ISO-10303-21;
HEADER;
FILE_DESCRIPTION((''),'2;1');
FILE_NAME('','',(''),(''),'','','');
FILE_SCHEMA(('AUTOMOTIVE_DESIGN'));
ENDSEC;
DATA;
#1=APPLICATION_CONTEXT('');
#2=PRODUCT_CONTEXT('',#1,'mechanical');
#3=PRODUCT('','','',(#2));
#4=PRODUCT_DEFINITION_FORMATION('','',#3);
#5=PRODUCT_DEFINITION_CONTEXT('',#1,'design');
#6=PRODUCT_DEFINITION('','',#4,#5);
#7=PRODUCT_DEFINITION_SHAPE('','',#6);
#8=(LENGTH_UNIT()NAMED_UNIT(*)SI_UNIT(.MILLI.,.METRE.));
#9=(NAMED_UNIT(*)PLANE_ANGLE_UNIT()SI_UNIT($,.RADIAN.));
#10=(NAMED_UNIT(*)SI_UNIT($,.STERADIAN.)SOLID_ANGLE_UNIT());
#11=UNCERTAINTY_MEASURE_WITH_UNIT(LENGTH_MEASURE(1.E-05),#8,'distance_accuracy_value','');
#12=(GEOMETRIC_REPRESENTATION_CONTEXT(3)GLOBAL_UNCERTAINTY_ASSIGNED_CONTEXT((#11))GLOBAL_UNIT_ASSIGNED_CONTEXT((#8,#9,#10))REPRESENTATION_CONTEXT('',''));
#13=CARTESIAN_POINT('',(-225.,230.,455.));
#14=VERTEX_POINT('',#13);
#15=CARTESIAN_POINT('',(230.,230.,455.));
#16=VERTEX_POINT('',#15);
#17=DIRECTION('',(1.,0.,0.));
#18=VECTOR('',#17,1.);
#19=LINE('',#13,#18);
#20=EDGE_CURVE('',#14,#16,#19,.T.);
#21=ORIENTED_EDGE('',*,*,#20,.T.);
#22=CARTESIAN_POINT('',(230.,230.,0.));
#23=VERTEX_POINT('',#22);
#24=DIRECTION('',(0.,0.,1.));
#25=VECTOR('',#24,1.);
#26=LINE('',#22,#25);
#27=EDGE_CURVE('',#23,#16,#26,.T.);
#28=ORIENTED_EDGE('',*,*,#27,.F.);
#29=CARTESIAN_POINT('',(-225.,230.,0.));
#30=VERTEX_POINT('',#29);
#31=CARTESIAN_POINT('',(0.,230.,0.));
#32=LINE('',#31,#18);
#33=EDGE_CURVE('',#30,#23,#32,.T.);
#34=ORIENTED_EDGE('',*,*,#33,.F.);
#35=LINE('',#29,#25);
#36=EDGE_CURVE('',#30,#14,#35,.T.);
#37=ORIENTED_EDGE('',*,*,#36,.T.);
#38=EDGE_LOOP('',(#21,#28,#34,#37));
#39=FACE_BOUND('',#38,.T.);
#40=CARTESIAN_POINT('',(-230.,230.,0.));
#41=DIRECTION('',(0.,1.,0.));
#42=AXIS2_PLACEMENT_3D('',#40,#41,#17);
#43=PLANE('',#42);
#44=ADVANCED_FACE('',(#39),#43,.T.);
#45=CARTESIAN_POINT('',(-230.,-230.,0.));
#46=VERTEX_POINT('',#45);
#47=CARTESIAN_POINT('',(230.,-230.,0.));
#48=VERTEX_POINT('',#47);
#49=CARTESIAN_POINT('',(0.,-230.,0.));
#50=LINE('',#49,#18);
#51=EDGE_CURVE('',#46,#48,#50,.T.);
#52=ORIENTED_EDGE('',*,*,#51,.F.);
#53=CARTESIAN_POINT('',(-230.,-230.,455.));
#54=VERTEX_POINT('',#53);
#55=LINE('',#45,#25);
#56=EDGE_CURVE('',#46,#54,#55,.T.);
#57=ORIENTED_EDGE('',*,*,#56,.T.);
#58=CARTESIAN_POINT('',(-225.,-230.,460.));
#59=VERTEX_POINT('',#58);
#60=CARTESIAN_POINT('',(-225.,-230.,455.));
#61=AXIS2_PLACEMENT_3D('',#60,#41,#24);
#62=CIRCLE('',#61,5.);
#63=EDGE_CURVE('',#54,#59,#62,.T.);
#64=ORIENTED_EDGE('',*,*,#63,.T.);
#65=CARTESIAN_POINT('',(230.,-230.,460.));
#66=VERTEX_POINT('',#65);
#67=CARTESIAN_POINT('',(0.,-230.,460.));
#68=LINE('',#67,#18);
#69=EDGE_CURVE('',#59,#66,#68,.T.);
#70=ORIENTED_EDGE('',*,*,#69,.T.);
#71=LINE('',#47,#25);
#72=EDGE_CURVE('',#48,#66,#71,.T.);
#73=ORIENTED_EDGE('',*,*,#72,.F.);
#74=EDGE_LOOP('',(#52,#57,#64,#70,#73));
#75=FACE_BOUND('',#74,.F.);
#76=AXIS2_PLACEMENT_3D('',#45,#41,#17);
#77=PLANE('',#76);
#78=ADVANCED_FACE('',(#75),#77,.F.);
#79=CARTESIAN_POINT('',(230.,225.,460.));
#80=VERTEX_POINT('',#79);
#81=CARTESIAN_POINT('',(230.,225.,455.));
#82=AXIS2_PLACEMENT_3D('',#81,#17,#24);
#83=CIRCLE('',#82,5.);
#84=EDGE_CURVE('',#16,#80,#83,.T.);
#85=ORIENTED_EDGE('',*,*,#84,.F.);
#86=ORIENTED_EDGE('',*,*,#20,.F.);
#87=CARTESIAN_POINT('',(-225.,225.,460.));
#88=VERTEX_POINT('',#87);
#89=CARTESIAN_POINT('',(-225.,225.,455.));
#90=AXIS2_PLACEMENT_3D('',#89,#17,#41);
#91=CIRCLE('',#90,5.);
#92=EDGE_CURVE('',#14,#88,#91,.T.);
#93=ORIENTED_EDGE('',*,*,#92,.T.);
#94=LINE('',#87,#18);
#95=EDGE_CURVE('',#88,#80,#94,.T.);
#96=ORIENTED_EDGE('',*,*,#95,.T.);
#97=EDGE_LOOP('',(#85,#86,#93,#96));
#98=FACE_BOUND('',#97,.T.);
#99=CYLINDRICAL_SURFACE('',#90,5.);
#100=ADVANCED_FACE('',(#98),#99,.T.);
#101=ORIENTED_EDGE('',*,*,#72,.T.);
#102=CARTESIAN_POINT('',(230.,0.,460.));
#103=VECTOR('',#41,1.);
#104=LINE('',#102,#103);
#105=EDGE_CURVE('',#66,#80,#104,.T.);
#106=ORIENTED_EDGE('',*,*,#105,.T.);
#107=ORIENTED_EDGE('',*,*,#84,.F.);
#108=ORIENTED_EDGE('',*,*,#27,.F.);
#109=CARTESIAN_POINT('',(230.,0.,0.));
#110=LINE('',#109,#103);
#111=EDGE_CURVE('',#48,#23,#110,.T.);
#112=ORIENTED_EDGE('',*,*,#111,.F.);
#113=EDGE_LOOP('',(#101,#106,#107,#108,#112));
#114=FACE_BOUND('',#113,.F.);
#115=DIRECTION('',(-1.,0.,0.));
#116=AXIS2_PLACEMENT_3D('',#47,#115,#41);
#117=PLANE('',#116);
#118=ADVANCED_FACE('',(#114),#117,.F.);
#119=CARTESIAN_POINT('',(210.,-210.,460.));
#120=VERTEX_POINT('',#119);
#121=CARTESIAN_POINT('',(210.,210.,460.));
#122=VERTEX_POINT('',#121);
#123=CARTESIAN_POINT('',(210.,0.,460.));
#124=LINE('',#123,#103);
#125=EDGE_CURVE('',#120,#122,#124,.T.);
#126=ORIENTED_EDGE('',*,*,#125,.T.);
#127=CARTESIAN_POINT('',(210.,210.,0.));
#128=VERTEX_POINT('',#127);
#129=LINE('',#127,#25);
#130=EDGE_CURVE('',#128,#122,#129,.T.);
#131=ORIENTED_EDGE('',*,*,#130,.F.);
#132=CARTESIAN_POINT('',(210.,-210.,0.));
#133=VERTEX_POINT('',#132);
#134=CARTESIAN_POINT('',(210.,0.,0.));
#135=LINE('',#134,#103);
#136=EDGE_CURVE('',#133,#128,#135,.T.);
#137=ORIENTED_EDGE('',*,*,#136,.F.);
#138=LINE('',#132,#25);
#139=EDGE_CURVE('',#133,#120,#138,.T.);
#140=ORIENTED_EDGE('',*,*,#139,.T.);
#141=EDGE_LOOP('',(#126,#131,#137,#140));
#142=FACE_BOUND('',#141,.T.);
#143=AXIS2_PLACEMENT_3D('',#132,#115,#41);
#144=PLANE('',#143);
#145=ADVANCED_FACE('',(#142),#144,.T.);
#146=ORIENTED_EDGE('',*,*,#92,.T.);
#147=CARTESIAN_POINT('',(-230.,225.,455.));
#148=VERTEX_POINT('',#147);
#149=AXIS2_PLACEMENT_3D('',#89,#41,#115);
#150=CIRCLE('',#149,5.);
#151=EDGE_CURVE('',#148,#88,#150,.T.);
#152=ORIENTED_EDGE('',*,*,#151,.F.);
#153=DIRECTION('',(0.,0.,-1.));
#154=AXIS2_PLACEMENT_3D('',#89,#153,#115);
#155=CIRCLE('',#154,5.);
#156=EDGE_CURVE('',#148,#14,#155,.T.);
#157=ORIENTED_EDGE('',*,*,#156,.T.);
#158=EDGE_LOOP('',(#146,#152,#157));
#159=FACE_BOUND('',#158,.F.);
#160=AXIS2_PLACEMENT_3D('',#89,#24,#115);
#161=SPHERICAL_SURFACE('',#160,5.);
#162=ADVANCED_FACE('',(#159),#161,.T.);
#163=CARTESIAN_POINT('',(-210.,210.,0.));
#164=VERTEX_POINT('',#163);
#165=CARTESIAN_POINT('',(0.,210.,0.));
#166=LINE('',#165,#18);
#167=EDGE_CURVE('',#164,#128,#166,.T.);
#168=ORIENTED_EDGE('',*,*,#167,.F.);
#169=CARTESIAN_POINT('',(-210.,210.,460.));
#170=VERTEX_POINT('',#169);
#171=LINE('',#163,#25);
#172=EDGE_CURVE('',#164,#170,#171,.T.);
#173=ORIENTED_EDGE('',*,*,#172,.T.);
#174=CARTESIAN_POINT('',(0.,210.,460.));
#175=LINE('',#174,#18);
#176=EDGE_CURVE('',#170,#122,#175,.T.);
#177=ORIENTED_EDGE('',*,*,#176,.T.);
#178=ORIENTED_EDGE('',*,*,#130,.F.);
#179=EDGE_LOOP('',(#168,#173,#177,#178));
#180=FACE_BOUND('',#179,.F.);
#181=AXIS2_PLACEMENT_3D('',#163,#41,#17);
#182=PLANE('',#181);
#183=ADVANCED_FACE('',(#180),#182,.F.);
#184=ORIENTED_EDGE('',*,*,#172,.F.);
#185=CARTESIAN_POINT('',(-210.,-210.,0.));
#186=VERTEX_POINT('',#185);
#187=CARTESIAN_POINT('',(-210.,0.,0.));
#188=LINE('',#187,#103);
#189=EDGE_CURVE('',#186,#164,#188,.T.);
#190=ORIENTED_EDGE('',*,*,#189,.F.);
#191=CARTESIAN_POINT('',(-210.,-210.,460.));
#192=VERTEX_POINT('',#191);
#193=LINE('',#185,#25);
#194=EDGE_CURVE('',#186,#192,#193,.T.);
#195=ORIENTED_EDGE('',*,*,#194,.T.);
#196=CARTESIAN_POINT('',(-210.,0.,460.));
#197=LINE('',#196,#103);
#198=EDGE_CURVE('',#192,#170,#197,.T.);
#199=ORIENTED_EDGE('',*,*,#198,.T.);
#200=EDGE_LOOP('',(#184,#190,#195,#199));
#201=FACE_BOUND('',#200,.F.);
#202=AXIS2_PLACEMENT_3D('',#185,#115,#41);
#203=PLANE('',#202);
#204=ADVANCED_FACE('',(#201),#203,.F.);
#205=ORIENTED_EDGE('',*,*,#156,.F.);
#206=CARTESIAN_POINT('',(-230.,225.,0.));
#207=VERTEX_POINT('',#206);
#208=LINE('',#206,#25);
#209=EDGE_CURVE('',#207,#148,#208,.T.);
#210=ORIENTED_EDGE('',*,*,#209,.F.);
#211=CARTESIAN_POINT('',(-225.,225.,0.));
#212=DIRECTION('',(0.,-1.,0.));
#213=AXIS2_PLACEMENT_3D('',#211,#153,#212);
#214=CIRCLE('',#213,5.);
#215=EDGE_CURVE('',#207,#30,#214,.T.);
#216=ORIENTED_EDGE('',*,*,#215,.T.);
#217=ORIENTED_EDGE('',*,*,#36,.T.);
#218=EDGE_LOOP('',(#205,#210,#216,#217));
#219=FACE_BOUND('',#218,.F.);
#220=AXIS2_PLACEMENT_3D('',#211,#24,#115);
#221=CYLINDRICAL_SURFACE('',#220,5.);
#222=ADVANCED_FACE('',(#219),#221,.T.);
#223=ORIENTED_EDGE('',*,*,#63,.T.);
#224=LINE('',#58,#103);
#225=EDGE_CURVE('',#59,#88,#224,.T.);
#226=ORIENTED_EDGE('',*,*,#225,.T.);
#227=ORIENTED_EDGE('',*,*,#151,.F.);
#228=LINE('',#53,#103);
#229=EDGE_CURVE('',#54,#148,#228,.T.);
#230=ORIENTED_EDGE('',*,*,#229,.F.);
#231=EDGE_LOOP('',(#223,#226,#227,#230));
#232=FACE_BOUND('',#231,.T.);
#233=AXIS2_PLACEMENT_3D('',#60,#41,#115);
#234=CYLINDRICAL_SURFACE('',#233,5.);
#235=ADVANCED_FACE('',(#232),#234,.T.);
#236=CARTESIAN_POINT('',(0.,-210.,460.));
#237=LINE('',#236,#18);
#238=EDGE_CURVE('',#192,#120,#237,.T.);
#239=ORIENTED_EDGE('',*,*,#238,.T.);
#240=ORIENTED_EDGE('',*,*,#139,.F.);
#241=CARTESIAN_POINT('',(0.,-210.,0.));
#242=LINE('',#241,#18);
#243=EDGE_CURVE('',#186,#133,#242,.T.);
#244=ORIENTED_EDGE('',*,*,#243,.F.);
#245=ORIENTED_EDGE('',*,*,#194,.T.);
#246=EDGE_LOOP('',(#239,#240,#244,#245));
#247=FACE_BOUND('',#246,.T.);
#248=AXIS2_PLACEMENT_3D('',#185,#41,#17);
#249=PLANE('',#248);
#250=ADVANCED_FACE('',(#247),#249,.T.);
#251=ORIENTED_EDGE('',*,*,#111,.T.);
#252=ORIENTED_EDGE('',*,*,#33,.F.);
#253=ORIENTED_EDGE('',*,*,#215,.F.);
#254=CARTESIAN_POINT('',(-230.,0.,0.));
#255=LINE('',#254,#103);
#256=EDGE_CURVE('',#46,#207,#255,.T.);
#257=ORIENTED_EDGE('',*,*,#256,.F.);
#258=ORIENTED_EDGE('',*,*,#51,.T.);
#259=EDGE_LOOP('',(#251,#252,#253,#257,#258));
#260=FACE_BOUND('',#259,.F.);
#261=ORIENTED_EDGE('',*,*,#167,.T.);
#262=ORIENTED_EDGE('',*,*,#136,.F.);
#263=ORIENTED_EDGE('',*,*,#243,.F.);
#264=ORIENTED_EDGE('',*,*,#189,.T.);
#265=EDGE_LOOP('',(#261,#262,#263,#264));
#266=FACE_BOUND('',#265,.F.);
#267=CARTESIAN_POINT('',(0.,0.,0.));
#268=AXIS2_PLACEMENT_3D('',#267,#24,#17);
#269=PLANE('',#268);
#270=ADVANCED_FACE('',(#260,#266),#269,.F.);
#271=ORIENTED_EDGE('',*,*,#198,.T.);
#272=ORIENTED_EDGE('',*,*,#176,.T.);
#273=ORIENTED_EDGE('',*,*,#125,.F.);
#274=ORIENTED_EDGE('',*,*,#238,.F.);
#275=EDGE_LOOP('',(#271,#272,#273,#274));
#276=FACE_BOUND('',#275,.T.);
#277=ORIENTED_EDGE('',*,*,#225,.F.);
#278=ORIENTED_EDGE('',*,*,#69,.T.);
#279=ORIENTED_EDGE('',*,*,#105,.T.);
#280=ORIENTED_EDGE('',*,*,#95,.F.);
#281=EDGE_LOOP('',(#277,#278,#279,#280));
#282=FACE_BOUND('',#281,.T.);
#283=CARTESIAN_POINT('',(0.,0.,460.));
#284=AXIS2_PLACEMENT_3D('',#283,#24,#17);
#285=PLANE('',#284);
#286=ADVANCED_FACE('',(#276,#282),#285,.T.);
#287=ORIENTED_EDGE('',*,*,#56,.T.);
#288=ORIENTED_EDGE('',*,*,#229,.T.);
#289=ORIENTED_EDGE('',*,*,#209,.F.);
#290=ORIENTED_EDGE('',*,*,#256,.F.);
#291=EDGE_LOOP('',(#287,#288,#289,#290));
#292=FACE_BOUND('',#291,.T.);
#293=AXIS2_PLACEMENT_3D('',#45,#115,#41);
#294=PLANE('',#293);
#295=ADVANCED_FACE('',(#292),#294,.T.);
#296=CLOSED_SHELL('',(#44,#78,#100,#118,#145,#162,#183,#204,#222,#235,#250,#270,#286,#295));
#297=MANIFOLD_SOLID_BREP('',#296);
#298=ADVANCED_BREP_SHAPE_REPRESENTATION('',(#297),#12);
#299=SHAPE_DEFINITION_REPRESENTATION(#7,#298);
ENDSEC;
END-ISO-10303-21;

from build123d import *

# Parameters (mm, degrees)
F2_W     = 460
F2_H     = 460
F2_W_2   = 420
F2_H_2   = 420
F3_DEPTH = 460
F4_R     = 5
F5_R     = 5


# Not quite as in the source:
# - the program builds the solid bodies; features that only make, move or delete a surface that nothing else refers to are left out


with BuildPart() as f3:
    # F2 (on Top) → F3 (new body)
    with BuildSketch(Plane.XY):
        Rectangle(F2_W, F2_H)
        Rectangle(F2_W_2, F2_H_2, mode=Mode.SUBTRACT)
    extrude(amount=F3_DEPTH)

    # F4
    f4_edges = [f3.edges().sort_by_distance(p)[0] for p in [
        (-230, 230, 230),
    ]]
    fillet(f4_edges, radius=F4_R)

    # F5
    f5_edges = [f3.edges().sort_by_distance(p)[0] for p in [
        (-230, -2.5, 460),
    ]]
    fillet(f5_edges, radius=F5_R)


solid = f3.part
